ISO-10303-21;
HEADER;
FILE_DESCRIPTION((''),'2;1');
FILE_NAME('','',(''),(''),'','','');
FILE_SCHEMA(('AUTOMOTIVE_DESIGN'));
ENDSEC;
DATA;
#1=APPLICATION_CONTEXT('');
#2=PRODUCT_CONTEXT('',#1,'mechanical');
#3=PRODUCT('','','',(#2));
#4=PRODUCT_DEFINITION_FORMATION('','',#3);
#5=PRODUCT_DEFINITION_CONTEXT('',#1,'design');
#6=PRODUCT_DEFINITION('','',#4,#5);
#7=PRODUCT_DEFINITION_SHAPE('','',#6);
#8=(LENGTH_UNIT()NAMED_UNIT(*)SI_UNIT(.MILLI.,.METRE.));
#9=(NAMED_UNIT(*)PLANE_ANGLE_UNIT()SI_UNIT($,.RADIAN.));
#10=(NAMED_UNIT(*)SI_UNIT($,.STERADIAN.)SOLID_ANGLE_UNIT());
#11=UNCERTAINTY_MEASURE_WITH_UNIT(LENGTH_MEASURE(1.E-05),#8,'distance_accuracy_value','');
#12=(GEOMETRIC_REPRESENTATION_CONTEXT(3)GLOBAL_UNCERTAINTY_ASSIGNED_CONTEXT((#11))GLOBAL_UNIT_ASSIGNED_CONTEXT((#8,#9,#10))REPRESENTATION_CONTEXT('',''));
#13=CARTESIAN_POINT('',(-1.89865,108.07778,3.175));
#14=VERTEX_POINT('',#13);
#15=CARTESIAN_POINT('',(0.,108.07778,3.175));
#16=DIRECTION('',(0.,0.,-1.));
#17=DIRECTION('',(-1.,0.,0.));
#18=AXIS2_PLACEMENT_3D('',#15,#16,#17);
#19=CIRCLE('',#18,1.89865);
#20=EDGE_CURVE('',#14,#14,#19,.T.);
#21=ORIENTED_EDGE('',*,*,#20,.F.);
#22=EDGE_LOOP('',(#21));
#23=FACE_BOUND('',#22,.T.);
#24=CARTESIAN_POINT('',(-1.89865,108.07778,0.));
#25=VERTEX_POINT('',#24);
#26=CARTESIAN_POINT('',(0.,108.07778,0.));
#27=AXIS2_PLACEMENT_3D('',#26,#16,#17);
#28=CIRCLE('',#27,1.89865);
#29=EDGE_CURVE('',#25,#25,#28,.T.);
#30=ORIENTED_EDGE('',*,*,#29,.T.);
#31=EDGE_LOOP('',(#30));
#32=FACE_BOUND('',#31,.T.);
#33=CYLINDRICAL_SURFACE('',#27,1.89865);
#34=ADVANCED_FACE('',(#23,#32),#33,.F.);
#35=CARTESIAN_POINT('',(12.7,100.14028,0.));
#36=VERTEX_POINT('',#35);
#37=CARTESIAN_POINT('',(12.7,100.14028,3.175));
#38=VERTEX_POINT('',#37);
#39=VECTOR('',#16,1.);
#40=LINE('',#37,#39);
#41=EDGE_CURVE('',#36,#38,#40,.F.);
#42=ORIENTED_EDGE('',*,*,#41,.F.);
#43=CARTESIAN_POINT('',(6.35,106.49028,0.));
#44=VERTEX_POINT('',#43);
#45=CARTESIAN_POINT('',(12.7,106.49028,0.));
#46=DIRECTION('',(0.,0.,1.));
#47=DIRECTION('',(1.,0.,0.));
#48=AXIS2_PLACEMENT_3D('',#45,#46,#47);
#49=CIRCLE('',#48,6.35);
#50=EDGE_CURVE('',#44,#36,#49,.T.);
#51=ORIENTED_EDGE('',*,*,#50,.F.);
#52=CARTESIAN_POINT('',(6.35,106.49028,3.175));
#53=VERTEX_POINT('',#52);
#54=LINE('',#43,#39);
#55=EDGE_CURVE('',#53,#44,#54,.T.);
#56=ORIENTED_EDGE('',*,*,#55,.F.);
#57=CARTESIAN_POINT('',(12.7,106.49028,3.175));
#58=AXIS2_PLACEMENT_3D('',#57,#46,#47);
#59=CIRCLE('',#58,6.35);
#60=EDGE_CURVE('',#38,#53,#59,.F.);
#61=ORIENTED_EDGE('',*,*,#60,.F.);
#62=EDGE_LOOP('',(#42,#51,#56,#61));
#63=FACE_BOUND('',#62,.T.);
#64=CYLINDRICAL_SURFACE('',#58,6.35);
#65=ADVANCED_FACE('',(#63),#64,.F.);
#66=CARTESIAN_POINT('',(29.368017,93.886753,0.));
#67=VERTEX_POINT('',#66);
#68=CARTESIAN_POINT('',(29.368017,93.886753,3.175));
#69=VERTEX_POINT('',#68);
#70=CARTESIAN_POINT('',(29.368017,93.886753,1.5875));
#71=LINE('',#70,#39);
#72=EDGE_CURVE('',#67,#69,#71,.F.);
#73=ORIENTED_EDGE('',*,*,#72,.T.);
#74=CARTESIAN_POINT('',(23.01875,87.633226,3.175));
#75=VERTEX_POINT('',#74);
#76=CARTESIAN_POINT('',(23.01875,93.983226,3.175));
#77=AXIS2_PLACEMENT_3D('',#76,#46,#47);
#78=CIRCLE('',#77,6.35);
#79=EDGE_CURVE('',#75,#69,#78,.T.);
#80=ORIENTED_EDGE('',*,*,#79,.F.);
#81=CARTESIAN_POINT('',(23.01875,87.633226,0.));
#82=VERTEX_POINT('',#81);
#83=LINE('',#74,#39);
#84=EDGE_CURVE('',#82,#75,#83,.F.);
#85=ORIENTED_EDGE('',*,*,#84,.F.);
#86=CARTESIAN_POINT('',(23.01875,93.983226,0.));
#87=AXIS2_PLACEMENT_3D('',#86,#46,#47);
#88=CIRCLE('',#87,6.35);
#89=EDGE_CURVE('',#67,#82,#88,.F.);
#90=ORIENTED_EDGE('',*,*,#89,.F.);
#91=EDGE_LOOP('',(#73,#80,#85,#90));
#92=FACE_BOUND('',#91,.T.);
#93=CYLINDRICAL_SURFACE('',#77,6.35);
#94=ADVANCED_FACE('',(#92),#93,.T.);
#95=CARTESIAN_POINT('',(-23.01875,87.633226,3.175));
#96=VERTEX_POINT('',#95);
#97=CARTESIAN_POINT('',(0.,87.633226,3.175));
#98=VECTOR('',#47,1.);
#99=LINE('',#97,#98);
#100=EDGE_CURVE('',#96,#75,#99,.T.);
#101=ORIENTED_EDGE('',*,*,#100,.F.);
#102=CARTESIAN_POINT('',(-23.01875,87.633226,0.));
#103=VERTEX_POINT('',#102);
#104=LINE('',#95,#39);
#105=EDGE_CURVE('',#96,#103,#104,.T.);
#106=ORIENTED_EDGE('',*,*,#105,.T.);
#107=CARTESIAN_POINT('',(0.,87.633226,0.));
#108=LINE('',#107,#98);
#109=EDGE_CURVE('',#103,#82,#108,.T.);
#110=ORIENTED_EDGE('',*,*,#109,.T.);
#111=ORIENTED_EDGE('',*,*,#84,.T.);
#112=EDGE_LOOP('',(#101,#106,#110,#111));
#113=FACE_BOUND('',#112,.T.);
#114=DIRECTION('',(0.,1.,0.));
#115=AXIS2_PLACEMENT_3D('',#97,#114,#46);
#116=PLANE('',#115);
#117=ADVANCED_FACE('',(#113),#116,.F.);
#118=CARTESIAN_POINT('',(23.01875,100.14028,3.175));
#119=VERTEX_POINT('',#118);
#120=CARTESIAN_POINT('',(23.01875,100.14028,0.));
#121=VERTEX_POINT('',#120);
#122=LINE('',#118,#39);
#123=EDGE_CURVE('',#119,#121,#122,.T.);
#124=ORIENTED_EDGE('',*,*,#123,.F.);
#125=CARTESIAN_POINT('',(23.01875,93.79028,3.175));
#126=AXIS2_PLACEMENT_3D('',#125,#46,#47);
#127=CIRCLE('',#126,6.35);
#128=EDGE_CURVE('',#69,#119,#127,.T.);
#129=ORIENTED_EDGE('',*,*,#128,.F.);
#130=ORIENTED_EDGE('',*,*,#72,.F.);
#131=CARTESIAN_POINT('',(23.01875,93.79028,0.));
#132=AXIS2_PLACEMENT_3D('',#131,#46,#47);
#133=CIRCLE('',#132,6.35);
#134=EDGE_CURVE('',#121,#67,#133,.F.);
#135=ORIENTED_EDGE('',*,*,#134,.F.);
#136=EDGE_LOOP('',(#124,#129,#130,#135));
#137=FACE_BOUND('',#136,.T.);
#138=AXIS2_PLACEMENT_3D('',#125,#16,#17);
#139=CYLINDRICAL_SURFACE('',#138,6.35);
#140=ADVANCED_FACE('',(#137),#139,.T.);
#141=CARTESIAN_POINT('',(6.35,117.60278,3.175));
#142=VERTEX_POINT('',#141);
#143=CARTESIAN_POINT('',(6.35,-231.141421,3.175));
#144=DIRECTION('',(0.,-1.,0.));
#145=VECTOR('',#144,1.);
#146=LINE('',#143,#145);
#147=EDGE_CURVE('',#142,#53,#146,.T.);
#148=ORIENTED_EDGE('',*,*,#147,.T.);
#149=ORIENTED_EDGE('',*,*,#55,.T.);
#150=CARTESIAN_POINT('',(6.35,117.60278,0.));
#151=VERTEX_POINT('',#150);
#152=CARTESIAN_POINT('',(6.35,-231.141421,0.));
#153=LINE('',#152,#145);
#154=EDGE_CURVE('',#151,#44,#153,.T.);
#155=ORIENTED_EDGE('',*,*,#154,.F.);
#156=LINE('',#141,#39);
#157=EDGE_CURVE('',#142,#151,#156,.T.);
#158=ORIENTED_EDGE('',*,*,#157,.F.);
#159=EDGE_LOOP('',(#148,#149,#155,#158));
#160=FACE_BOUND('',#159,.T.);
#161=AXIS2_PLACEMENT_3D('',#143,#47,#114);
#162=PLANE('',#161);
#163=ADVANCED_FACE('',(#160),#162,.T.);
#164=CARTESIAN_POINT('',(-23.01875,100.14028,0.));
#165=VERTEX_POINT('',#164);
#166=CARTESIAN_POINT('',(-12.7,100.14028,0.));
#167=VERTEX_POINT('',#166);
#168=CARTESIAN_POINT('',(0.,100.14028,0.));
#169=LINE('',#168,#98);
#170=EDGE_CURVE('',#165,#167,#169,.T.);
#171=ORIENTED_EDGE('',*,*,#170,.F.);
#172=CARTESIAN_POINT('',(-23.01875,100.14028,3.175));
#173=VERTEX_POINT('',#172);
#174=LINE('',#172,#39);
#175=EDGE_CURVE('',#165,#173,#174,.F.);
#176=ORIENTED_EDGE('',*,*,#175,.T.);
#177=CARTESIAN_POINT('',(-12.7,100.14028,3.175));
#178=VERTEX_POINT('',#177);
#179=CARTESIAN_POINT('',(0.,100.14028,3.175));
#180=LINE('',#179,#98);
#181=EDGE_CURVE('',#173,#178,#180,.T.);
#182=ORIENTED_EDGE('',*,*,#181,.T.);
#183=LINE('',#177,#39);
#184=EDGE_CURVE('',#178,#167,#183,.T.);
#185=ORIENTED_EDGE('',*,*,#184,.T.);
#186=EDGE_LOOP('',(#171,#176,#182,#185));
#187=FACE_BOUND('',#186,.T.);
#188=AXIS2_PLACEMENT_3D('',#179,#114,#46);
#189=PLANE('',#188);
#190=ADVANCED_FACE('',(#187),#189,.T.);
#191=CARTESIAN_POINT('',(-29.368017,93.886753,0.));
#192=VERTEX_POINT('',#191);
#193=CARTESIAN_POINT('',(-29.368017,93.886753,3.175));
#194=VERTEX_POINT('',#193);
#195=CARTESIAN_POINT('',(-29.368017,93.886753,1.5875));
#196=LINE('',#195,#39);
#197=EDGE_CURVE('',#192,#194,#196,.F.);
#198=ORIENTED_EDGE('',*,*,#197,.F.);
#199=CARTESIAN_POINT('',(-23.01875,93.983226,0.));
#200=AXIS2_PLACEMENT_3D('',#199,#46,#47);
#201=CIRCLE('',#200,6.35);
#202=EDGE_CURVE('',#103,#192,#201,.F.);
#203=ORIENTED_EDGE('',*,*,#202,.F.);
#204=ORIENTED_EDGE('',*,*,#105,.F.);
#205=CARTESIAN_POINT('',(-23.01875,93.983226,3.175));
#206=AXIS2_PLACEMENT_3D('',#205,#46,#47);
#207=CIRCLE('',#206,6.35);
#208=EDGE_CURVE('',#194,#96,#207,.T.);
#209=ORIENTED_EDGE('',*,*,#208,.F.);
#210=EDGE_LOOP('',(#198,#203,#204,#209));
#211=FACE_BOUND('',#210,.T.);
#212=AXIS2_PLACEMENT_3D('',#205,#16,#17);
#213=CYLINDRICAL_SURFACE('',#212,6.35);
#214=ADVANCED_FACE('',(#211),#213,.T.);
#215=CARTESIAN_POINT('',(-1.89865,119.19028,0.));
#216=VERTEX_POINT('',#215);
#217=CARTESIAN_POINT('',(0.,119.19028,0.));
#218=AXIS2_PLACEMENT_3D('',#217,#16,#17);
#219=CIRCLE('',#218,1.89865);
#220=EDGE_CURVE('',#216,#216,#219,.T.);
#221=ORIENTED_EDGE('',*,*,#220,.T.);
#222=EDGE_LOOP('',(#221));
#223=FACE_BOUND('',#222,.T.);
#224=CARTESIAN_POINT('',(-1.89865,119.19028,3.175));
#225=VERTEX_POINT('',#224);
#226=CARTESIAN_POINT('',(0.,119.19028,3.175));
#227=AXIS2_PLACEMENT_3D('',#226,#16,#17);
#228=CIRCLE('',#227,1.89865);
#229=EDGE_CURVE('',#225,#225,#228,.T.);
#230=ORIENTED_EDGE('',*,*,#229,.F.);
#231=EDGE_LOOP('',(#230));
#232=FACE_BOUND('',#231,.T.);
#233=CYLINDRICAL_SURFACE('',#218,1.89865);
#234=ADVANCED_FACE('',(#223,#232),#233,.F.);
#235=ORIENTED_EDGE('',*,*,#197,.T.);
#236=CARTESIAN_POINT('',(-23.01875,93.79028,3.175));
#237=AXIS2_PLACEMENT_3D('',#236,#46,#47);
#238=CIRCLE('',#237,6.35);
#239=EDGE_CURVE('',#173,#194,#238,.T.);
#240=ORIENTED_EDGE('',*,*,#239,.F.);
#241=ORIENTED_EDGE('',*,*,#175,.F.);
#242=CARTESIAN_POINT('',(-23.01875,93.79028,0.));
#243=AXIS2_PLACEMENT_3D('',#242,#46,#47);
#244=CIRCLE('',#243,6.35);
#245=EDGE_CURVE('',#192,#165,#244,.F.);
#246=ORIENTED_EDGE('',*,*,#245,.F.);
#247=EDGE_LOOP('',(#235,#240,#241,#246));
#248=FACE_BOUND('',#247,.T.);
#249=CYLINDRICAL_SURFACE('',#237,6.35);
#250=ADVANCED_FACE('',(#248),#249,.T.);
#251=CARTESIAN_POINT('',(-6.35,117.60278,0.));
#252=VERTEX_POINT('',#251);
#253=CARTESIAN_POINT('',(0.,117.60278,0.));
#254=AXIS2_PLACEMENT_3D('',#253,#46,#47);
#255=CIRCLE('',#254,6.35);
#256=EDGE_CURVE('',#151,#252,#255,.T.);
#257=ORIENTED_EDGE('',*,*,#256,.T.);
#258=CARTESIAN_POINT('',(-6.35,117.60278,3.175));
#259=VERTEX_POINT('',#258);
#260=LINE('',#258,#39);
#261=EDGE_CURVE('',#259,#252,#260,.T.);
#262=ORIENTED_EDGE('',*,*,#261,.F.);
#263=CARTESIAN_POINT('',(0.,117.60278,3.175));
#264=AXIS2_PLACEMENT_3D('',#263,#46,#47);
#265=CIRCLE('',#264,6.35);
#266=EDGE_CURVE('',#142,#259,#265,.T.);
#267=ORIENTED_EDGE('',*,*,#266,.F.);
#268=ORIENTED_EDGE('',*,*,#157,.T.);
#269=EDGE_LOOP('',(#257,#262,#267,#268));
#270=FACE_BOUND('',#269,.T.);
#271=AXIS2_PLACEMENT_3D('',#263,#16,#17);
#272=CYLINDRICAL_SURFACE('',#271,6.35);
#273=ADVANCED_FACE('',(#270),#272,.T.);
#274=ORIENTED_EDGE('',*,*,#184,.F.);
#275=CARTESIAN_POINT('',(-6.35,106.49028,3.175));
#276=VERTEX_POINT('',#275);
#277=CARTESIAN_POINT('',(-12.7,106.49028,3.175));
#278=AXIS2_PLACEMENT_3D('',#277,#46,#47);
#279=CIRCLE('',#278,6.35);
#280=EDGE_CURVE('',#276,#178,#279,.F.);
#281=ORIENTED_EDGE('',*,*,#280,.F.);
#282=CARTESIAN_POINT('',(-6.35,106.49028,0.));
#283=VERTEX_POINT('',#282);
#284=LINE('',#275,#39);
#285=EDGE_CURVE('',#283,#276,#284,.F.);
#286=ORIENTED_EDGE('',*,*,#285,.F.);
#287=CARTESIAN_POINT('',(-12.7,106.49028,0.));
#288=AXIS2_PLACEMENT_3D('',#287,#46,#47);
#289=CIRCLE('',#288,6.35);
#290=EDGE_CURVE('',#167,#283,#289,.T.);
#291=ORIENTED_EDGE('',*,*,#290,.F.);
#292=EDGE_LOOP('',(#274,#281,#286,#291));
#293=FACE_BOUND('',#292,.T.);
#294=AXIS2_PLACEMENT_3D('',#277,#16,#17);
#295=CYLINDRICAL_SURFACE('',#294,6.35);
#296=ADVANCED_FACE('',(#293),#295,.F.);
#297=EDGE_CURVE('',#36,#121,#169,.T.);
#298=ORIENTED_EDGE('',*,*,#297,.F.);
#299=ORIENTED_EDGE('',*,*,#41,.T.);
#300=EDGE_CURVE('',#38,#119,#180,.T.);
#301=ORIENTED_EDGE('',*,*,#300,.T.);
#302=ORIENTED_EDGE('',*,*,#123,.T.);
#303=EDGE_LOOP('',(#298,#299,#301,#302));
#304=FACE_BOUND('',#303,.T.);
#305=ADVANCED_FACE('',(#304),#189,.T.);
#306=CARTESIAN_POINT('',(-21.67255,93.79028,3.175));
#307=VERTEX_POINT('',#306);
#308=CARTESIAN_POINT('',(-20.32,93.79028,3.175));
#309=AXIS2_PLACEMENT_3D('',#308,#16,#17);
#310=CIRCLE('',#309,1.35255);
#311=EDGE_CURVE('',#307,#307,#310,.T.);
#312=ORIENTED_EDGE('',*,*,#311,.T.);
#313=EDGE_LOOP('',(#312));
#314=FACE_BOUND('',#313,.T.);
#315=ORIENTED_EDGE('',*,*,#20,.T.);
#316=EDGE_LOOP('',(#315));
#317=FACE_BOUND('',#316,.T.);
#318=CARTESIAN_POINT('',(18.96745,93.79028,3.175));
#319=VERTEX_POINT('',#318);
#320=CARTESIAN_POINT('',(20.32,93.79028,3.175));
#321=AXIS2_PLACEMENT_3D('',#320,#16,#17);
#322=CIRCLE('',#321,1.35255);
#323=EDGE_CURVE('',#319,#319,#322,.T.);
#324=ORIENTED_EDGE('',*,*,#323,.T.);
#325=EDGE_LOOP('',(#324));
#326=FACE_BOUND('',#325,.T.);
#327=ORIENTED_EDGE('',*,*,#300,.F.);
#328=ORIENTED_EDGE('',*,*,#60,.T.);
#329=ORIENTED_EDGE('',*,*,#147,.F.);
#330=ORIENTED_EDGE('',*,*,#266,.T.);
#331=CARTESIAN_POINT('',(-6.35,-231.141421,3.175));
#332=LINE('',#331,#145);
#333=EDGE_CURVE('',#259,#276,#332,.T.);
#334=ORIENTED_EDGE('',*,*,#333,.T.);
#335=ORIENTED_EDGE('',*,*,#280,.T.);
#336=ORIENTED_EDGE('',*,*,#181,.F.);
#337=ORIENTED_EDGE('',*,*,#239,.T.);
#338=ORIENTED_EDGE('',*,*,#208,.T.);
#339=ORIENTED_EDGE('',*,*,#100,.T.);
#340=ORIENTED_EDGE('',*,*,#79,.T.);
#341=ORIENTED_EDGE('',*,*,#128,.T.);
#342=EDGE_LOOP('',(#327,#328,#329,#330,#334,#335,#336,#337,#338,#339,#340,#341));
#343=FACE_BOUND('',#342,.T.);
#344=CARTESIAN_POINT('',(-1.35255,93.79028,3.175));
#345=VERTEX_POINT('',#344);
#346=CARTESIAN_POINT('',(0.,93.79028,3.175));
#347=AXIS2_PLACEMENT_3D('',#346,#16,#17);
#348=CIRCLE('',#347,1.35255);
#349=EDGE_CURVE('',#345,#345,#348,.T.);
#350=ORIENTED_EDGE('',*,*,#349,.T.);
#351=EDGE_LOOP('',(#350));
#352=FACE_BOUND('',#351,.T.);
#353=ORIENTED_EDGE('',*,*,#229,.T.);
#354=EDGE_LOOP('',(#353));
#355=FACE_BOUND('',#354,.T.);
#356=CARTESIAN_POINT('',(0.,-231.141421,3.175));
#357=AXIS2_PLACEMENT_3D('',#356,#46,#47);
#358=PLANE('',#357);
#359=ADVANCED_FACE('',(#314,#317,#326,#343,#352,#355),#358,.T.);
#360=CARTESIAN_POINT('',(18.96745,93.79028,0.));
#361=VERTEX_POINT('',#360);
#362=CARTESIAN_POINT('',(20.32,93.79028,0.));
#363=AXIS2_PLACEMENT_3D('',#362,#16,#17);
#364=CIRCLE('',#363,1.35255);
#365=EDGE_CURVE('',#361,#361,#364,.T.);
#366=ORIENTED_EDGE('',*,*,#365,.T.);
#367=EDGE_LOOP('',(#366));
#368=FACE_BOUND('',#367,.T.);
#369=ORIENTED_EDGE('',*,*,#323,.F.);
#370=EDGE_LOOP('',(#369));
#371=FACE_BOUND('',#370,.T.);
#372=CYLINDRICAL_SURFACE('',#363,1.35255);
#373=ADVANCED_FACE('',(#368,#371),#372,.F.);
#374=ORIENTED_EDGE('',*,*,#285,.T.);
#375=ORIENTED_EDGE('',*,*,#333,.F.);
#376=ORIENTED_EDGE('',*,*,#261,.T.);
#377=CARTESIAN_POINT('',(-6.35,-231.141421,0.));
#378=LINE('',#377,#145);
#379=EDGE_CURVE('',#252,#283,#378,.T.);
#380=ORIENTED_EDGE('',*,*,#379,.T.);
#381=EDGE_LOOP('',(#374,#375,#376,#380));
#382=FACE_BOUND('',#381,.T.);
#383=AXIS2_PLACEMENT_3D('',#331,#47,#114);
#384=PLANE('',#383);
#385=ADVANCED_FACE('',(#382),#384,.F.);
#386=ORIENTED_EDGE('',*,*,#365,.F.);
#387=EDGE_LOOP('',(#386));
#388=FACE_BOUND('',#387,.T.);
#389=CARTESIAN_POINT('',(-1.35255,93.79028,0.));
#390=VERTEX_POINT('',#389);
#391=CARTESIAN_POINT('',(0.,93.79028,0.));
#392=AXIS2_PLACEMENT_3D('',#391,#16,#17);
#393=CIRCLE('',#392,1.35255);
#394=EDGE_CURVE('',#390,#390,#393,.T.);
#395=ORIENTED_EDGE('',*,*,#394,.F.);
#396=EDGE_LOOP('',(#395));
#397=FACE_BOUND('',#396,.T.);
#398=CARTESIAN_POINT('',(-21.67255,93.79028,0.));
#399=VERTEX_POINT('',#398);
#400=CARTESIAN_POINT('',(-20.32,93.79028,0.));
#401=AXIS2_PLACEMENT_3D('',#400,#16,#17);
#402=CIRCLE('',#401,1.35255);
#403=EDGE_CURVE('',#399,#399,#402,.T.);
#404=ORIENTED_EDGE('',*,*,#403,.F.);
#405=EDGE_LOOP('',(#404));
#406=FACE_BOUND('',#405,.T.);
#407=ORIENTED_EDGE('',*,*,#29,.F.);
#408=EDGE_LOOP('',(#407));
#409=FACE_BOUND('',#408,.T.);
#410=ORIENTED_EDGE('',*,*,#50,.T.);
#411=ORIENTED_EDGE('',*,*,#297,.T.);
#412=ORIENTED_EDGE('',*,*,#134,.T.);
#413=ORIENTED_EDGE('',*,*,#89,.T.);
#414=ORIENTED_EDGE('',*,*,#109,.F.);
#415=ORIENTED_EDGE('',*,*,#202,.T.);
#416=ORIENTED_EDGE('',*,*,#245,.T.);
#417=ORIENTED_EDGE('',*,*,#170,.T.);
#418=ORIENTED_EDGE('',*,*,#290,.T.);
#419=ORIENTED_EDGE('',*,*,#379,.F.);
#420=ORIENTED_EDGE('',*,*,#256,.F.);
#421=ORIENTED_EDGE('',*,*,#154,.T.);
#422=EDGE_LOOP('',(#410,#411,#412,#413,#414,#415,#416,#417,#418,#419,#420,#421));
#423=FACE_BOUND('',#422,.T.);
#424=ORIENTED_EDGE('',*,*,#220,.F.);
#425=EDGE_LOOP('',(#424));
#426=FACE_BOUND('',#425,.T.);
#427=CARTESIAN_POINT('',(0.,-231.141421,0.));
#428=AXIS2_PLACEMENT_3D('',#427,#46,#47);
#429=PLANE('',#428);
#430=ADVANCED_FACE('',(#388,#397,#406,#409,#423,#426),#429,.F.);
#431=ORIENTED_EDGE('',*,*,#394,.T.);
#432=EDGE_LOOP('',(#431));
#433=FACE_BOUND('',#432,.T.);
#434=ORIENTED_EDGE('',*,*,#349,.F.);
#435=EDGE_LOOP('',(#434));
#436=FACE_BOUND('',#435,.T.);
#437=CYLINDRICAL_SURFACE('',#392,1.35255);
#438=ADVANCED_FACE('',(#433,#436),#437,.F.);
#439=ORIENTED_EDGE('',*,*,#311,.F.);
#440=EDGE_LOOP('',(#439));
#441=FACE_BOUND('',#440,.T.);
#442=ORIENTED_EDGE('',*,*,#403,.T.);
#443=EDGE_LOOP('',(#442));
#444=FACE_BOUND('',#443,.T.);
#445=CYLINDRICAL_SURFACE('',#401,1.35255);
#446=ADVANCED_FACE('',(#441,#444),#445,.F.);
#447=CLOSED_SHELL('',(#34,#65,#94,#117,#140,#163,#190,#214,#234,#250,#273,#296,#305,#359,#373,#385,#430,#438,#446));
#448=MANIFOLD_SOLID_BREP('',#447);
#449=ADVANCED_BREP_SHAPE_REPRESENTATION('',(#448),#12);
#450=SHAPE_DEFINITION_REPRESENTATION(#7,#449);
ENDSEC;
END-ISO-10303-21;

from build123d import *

# Parameters (mm, degrees)
BODY_DEPTH            = 3.175
FILLET1_R             = 6.35
F_6_32_TAPPED_HOLE1_D = 2.7051
F_6_CLEARANCE_HOLE2_D = 3.7973


with BuildPart() as part:
    # Sketch1 → Body (new body)
    with BuildSketch(Plane.XY):
        with BuildLine():
            Line((-6.35, 100.140279829), (-29.36875, 100.140279829))
            Line((-29.36875, 100.140279829), (-29.36875, 87.633226142))
            Line((-29.36875, 87.633226142), (29.36875, 87.633226142))
            Line((29.36875, 87.633226142), (29.36875, 100.140279829))
            Line((29.36875, 100.140279829), (6.35, 100.140279829))
            Line((6.35, 100.140279829), (6.35, 117.602779829))
            ThreePointArc((6.35, 117.602779829), (0, 123.952779829), (-6.35, 117.602779829))
            Line((-6.35, 117.602779829), (-6.35, 100.140279829))
        make_face()
    extrude(amount=BODY_DEPTH)

    # Fillet1
    # the kernel refuses this fillet: 6.35 mm, written as the material it adds along each edge
    with BuildSketch(Plane(origin=(6.35, 100.140279829, 0), x_dir=(1, 0, 0), z_dir=(0, 0, 1)), Plane(origin=(-6.35, 100.140279829, 0), x_dir=(0, 1, 0), z_dir=(0, 0, 1))) as fillet1_piece_1:
        with BuildLine():
            CenterArc((FILLET1_R, FILLET1_R), FILLET1_R, 180, 90)
            Line((0, FILLET1_R), (0, 0))
            Line((0, 0), (FILLET1_R, 0))
        make_face()
    extrude(amount=3.175)
    # the kernel refuses this fillet: 6.35 mm, written as the material it takes off along each edge
    with BuildSketch(Plane(origin=(29.36875, 87.633226142, -15.875), x_dir=(-1, 0, 0), z_dir=(0, 0, 1)), Plane(origin=(29.36875, 100.140279829, -15.875), x_dir=(0, -1, 0), z_dir=(0, 0, 1)), Plane(origin=(-29.36875, 100.140279829, -15.875), x_dir=(1, 0, 0), z_dir=(0, 0, 1)), Plane(origin=(-29.36875, 87.633226142, -15.875), x_dir=(0, 1, 0), z_dir=(0, 0, 1))) as fillet1_2_piece_1:
        with BuildLine():
            CenterArc((FILLET1_R, -FILLET1_R), FILLET1_R, 90, 90)
            Line((0, -FILLET1_R), (0, 0))
            Line((0, 0), (FILLET1_R, 0))
        make_face()
    extrude(amount=34.925, mode=Mode.SUBTRACT)

    # #6-32 Tapped Hole1 (through all)
    with Locations(Plane(origin=(20.32, 93.790279829, 0), x_dir=(-1, 0, 0), z_dir=(0, 0, -1))):
        with Locations((0, 0), (20.32, 0), (40.64, 0)):
            Hole(F_6_32_TAPPED_HOLE1_D / 2)

    # #6 Clearance Hole2 (through all)
    with Locations(Plane(origin=(0, 119.190279829, 0), x_dir=(-1, 0, 0), z_dir=(0, 0, -1))):
        with Locations((0, 0), (-25.4316925, 83.647585323), (0, -11.1125)):
            Hole(F_6_CLEARANCE_HOLE2_D / 2)


solid = part.part
